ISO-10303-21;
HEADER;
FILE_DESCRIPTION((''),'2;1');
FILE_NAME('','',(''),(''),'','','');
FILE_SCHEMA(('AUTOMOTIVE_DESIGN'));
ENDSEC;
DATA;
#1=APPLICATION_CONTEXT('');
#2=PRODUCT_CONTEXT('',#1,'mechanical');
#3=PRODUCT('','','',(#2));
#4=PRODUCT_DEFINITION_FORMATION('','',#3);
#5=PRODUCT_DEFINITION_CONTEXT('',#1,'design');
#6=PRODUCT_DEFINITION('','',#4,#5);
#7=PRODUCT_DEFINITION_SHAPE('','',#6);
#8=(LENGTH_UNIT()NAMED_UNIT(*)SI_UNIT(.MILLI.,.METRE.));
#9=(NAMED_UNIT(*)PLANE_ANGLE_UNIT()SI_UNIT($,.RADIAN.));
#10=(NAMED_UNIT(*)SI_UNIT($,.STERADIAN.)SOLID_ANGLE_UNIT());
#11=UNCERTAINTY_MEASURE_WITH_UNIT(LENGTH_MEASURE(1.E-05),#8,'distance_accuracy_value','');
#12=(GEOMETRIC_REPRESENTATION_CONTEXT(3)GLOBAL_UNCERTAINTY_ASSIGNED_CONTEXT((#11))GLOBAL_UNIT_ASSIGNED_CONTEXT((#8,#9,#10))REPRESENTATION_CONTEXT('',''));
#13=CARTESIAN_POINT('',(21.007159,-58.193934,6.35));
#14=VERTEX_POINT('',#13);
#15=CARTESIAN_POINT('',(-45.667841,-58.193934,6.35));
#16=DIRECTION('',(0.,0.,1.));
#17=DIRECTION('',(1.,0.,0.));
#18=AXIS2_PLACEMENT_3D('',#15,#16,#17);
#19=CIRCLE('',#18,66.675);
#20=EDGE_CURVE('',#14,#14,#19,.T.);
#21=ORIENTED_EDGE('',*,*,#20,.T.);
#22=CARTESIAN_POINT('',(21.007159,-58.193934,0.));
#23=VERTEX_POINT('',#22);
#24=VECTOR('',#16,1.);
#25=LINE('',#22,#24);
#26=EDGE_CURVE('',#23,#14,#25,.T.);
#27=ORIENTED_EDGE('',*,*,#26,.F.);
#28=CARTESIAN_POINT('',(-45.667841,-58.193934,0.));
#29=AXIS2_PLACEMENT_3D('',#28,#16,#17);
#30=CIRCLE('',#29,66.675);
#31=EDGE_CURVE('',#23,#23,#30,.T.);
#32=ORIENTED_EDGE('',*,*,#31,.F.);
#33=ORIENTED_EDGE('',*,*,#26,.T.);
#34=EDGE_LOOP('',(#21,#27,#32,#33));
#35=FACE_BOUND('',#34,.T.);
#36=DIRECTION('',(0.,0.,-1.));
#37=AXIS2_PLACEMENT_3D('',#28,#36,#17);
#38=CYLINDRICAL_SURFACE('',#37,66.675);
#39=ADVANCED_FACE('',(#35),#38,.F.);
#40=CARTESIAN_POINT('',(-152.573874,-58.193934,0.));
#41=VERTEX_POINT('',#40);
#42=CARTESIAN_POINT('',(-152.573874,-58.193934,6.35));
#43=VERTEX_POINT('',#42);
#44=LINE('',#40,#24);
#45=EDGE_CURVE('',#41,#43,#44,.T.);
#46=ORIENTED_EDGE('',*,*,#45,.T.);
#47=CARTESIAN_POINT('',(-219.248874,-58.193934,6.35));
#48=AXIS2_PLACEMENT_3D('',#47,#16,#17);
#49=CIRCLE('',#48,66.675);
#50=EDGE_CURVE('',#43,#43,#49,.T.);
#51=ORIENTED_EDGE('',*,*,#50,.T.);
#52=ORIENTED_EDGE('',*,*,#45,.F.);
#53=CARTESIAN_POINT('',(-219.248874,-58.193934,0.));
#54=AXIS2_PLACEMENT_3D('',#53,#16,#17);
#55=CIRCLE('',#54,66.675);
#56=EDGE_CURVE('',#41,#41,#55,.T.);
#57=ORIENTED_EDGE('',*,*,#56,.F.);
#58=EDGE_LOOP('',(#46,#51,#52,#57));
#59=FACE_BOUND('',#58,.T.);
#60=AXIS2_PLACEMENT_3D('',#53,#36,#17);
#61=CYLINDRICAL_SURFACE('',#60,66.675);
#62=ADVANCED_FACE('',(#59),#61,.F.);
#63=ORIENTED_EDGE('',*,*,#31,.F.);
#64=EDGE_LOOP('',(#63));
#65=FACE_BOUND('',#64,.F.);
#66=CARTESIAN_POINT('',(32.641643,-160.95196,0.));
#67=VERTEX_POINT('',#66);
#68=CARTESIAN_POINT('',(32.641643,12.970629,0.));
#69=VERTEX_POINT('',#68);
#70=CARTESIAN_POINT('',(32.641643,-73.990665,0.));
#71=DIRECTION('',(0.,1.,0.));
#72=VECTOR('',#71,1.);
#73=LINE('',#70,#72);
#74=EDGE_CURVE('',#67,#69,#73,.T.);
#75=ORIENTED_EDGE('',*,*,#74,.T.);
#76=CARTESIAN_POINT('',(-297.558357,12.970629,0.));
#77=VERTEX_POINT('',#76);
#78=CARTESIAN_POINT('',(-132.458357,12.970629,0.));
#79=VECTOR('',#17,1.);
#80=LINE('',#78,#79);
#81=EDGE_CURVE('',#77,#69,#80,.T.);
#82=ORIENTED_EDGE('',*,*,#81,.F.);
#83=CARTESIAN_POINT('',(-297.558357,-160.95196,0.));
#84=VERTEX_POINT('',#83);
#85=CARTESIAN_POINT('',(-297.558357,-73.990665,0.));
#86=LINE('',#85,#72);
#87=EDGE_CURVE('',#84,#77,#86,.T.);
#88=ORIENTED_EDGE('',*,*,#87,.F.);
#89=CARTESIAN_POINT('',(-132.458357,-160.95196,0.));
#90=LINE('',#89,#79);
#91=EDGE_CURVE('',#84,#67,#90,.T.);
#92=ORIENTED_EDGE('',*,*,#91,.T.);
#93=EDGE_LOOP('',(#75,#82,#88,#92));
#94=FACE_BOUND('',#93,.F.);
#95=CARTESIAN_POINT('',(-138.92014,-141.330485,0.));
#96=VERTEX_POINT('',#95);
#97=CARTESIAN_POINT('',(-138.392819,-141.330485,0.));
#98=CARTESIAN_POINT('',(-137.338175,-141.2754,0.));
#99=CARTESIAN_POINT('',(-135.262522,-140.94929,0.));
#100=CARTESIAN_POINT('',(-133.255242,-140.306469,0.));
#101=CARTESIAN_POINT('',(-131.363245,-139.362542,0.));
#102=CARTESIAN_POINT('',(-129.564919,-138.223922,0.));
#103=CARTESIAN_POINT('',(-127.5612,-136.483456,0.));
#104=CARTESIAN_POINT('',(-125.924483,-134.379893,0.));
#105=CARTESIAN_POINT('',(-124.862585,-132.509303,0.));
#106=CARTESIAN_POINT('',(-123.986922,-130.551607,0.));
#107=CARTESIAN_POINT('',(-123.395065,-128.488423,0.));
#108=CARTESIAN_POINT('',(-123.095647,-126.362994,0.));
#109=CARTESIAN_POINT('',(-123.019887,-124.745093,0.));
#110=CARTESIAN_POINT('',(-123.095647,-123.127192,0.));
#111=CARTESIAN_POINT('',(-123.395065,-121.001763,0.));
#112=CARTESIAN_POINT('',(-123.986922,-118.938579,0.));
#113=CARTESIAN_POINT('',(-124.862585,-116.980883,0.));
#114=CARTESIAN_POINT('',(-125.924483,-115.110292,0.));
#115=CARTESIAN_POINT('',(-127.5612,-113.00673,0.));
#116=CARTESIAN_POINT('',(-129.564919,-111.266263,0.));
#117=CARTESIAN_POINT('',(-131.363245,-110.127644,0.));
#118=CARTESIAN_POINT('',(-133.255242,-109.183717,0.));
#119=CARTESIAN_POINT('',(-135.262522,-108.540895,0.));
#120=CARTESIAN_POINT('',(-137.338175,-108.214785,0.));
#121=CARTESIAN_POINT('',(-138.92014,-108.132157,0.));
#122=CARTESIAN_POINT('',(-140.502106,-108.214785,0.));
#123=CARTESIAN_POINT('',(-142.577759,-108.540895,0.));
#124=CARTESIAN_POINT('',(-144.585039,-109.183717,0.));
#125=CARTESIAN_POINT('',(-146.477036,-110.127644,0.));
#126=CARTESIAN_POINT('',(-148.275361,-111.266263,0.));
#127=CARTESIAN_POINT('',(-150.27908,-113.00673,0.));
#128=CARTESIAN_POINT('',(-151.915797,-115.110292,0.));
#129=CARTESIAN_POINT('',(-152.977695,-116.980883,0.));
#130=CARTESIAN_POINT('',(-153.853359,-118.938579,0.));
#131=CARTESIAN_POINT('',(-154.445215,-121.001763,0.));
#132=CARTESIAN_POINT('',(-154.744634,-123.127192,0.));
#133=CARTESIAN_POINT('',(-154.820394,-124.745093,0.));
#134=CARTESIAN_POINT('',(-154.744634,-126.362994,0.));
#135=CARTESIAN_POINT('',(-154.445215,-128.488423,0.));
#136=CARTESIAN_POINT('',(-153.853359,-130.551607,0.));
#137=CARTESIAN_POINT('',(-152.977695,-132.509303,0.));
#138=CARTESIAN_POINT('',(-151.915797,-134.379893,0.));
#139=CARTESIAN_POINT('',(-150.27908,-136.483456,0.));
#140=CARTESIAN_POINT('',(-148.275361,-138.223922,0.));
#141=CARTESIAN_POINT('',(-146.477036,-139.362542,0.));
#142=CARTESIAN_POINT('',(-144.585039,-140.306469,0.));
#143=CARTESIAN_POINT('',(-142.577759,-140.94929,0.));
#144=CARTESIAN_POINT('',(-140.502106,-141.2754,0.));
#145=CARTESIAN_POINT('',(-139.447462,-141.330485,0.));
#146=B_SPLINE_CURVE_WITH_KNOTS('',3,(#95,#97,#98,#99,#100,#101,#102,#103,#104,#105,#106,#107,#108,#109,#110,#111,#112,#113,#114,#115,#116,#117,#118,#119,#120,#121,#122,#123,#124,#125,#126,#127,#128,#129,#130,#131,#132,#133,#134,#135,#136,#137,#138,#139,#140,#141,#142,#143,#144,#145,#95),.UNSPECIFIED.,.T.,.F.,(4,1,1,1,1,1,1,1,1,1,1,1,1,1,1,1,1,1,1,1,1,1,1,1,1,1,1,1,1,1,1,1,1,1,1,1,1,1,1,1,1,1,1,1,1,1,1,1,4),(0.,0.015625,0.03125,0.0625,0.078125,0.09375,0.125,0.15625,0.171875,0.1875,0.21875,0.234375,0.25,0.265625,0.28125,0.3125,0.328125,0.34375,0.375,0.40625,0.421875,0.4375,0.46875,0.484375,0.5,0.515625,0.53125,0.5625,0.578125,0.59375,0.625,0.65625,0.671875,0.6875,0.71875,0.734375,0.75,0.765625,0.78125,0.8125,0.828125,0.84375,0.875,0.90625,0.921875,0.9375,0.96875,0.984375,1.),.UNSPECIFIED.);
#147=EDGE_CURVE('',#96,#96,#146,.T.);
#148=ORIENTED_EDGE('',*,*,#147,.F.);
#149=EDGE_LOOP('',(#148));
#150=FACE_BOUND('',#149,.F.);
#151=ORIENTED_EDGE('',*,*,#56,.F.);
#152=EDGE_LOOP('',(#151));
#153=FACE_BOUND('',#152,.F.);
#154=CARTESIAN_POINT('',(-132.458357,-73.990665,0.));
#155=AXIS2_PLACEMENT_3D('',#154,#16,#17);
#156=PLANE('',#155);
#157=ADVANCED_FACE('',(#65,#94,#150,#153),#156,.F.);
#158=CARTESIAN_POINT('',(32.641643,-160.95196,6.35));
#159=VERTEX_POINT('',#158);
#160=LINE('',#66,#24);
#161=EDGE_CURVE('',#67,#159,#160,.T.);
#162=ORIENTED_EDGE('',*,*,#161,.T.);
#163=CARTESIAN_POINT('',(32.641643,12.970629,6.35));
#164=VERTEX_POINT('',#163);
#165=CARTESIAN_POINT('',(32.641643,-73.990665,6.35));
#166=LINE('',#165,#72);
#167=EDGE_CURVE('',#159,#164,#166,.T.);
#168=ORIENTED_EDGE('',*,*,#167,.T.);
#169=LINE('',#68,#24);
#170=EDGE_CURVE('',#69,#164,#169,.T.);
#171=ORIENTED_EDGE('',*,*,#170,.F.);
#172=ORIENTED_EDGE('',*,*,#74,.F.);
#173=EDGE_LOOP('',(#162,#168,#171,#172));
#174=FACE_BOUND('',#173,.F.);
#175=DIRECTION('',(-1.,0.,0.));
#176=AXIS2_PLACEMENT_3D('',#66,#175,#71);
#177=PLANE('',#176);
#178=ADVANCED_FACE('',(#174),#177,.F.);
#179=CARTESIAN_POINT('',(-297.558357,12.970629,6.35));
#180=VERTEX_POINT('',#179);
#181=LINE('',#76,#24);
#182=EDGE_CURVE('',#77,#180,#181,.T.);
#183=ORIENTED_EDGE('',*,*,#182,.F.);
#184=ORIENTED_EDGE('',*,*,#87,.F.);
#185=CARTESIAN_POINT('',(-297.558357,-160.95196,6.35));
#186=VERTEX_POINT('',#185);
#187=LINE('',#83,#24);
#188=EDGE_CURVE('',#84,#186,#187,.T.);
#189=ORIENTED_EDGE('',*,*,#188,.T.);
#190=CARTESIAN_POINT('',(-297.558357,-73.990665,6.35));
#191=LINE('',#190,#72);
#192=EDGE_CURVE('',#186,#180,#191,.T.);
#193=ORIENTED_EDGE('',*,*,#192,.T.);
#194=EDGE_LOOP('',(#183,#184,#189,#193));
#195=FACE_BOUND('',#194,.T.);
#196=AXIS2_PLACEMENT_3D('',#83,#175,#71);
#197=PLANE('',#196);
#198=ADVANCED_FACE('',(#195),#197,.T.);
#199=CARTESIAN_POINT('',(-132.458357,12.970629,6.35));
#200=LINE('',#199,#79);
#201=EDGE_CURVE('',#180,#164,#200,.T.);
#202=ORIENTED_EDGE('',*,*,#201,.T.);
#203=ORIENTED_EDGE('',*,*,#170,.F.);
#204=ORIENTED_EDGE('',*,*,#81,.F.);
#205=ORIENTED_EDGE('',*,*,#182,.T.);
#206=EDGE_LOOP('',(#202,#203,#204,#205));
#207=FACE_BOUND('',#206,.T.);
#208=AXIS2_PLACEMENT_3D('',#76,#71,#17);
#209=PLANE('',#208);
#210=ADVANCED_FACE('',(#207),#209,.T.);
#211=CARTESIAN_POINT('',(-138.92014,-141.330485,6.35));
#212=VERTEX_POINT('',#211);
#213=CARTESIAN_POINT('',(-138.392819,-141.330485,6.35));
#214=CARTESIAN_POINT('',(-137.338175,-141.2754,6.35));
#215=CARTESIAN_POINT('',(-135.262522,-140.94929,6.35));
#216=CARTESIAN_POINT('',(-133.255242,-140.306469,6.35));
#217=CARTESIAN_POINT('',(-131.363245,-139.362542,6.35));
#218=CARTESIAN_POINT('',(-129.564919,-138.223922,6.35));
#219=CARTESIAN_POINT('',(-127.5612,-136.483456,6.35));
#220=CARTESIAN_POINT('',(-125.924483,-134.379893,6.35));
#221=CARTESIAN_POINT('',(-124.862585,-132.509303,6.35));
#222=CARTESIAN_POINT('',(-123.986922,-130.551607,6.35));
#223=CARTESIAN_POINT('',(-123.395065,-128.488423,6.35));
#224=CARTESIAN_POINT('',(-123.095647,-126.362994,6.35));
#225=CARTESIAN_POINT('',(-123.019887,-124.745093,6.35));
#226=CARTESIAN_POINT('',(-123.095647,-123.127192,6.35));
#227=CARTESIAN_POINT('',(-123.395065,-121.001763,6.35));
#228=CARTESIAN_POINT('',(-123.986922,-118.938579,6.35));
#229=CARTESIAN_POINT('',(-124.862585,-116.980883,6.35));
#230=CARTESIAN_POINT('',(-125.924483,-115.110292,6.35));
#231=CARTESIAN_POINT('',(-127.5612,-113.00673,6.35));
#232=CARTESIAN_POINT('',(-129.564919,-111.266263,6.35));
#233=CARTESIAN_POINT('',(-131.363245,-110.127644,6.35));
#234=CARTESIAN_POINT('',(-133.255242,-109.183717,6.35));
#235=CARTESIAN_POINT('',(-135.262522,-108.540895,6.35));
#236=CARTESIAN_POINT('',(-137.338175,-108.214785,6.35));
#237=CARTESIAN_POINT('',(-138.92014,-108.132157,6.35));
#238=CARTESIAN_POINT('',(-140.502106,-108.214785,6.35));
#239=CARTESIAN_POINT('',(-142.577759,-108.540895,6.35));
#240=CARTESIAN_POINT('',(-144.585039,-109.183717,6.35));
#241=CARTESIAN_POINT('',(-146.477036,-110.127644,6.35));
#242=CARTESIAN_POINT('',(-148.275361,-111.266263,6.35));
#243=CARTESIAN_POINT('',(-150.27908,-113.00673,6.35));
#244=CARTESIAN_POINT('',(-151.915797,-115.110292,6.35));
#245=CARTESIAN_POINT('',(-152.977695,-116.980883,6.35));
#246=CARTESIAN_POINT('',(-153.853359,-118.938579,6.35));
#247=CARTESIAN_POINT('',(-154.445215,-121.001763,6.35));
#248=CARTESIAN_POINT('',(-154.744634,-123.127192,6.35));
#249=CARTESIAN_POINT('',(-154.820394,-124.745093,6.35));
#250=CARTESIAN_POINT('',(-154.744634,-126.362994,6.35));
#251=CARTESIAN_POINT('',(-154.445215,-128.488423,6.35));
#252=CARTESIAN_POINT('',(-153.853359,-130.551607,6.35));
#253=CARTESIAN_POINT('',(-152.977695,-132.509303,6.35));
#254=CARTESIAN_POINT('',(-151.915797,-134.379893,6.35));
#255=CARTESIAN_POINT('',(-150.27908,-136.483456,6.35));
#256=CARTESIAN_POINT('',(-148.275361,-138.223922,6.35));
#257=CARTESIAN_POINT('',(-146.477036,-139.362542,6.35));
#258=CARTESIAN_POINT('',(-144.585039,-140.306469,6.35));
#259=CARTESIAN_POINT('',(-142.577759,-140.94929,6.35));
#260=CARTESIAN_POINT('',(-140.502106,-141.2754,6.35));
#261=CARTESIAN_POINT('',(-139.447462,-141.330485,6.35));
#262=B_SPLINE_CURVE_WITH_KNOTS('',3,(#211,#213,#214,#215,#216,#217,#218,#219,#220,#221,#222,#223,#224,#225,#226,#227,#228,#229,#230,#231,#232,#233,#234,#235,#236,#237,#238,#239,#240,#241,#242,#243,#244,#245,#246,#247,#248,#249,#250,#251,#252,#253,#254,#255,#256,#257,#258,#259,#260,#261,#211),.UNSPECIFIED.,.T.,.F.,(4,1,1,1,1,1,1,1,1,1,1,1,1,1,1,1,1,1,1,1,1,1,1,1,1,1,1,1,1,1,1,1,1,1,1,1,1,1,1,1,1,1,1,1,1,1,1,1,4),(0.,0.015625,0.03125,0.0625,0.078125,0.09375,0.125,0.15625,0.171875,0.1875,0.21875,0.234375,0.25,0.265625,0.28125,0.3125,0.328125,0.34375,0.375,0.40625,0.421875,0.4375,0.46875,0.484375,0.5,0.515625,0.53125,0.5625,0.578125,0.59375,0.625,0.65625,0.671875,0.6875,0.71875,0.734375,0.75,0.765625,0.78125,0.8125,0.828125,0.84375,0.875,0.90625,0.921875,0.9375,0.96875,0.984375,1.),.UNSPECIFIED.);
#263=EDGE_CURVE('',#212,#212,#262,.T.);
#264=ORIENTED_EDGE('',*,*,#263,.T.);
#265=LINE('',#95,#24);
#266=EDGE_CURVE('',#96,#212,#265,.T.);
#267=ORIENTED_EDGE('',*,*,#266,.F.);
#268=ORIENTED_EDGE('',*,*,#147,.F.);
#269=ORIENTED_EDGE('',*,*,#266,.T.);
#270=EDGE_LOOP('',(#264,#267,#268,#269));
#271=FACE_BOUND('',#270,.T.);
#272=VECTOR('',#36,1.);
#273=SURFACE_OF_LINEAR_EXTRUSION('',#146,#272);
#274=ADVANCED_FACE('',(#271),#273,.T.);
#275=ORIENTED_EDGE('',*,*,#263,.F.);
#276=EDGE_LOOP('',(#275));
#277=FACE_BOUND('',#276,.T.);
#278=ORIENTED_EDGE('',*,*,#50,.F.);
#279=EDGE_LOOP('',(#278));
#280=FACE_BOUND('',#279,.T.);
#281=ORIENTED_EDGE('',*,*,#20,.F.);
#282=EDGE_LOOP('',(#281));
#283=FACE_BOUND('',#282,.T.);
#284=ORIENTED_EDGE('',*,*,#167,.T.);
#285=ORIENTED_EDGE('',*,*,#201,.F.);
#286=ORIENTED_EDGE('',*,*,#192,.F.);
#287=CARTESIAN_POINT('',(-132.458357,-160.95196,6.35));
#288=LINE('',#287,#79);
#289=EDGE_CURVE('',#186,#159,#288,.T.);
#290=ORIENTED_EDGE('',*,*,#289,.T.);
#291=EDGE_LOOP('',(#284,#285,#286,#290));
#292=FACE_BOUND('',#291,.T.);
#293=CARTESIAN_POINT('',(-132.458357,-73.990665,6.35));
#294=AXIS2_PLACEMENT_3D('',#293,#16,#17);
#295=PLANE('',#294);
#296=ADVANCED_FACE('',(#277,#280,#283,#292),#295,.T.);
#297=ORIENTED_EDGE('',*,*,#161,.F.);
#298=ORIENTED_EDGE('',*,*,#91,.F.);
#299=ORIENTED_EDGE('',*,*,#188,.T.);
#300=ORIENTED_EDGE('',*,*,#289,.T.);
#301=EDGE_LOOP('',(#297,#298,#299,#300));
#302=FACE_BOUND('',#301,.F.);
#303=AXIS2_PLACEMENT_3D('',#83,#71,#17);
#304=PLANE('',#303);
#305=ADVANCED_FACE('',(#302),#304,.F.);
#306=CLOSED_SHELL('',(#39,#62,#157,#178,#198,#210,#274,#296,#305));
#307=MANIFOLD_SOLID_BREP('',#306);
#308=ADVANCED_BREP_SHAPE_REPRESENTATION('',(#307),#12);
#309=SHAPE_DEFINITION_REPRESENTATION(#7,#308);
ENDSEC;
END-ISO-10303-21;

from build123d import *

# Parameters (mm, degrees)
F0_W     = 330.2
F0_H     = 173.9225888619
F0_R     = 66.675
F1_DEPTH = 6.35


# Not quite as in the source:
# - the dataset's text gives a spline's control points without its knots; the knots are read off the source's solid


with BuildPart() as f1:
    # F0 (on Top) → F1 (new body)
    with BuildSketch(Plane.XY):
        with Locations((-132.4583572531, -73.9906652679)):
            Rectangle(F0_W, F0_H)
        with BuildLine():
            add(Edge.make_bspline(
                [(-138.9201402808, -141.3304854369), (-138.3928185407, -141.3304854369), (-137.3381750605, -141.275400301), (-135.2625215798, -140.9492902881), (-133.2552416123, -140.3064688013), (-131.3632448334, -139.3625418043), (-129.5649193209, -138.2239224731), (-127.5612000685, -136.4834555233), (-125.9244832491, -134.3798930655), (-124.862585277, -132.5093025607), (-123.9869219901, -130.5516065921), (-123.3950651292, -128.4884227829), (-123.095646983, -126.3629935264), (-123.0198869297, -124.7450926538), (-123.095646983, -123.1271917812), (-123.3950651292, -121.0017625246), (-123.9869219901, -118.9385787154), (-124.862585277, -116.9808827469), (-125.9244832491, -115.110292242), (-127.5612000685, -113.0067297843), (-129.5649193209, -111.2662628345), (-131.3632448334, -110.1276435032), (-133.2552416123, -109.1837165063), (-135.2625215798, -108.5408950195), (-137.3381750605, -108.2147850066), (-138.9201402808, -108.1321573027), (-140.5021055011, -108.2147850066), (-142.5777589818, -108.5408950195), (-144.5850389493, -109.1837165063), (-146.4770357282, -110.1276435032), (-148.2753612407, -111.2662628345), (-150.2790804931, -113.0067297843), (-151.9157973125, -115.110292242), (-152.9776952845, -116.9808827469), (-153.8533585715, -118.9385787154), (-154.4452154324, -121.0017625246), (-154.7446335786, -123.1271917812), (-154.8203936319, -124.7450926538), (-154.7446335786, -126.3629935264), (-154.4452154324, -128.4884227829), (-153.8533585715, -130.5516065921), (-152.9776952845, -132.5093025607), (-151.9157973125, -134.3798930655), (-150.2790804931, -136.4834555233), (-148.2753612407, -138.2239224731), (-146.4770357282, -139.3625418043), (-144.5850389493, -140.3064688013), (-142.5777589818, -140.9492902881), (-140.5021055011, -141.275400301), (-139.4474620209, -141.3304854369), (-138.9201402808, -141.3304854369)],
                knots=[0, 0, 0, 0, 0.015625, 0.03125, 0.0625, 0.078125, 0.09375, 0.125, 0.15625, 0.171875, 0.1875, 0.21875, 0.234375, 0.25, 0.265625, 0.28125, 0.3125, 0.328125, 0.34375, 0.375, 0.40625, 0.421875, 0.4375, 0.46875, 0.484375, 0.5, 0.515625, 0.53125, 0.5625, 0.578125, 0.59375, 0.625, 0.65625, 0.671875, 0.6875, 0.71875, 0.734375, 0.75, 0.765625, 0.78125, 0.8125, 0.828125, 0.84375, 0.875, 0.90625, 0.921875, 0.9375, 0.96875, 0.984375, 1, 1, 1, 1], degree=3))
        make_face(mode=Mode.SUBTRACT)
        with Locations((-219.2488735842, -58.1939341619)):
            Circle(F0_R, mode=Mode.SUBTRACT)
        with Locations((-45.6678409221, -58.1939341619)):
            Circle(F0_R, mode=Mode.SUBTRACT)
    extrude(amount=F1_DEPTH)


solid = f1.part
